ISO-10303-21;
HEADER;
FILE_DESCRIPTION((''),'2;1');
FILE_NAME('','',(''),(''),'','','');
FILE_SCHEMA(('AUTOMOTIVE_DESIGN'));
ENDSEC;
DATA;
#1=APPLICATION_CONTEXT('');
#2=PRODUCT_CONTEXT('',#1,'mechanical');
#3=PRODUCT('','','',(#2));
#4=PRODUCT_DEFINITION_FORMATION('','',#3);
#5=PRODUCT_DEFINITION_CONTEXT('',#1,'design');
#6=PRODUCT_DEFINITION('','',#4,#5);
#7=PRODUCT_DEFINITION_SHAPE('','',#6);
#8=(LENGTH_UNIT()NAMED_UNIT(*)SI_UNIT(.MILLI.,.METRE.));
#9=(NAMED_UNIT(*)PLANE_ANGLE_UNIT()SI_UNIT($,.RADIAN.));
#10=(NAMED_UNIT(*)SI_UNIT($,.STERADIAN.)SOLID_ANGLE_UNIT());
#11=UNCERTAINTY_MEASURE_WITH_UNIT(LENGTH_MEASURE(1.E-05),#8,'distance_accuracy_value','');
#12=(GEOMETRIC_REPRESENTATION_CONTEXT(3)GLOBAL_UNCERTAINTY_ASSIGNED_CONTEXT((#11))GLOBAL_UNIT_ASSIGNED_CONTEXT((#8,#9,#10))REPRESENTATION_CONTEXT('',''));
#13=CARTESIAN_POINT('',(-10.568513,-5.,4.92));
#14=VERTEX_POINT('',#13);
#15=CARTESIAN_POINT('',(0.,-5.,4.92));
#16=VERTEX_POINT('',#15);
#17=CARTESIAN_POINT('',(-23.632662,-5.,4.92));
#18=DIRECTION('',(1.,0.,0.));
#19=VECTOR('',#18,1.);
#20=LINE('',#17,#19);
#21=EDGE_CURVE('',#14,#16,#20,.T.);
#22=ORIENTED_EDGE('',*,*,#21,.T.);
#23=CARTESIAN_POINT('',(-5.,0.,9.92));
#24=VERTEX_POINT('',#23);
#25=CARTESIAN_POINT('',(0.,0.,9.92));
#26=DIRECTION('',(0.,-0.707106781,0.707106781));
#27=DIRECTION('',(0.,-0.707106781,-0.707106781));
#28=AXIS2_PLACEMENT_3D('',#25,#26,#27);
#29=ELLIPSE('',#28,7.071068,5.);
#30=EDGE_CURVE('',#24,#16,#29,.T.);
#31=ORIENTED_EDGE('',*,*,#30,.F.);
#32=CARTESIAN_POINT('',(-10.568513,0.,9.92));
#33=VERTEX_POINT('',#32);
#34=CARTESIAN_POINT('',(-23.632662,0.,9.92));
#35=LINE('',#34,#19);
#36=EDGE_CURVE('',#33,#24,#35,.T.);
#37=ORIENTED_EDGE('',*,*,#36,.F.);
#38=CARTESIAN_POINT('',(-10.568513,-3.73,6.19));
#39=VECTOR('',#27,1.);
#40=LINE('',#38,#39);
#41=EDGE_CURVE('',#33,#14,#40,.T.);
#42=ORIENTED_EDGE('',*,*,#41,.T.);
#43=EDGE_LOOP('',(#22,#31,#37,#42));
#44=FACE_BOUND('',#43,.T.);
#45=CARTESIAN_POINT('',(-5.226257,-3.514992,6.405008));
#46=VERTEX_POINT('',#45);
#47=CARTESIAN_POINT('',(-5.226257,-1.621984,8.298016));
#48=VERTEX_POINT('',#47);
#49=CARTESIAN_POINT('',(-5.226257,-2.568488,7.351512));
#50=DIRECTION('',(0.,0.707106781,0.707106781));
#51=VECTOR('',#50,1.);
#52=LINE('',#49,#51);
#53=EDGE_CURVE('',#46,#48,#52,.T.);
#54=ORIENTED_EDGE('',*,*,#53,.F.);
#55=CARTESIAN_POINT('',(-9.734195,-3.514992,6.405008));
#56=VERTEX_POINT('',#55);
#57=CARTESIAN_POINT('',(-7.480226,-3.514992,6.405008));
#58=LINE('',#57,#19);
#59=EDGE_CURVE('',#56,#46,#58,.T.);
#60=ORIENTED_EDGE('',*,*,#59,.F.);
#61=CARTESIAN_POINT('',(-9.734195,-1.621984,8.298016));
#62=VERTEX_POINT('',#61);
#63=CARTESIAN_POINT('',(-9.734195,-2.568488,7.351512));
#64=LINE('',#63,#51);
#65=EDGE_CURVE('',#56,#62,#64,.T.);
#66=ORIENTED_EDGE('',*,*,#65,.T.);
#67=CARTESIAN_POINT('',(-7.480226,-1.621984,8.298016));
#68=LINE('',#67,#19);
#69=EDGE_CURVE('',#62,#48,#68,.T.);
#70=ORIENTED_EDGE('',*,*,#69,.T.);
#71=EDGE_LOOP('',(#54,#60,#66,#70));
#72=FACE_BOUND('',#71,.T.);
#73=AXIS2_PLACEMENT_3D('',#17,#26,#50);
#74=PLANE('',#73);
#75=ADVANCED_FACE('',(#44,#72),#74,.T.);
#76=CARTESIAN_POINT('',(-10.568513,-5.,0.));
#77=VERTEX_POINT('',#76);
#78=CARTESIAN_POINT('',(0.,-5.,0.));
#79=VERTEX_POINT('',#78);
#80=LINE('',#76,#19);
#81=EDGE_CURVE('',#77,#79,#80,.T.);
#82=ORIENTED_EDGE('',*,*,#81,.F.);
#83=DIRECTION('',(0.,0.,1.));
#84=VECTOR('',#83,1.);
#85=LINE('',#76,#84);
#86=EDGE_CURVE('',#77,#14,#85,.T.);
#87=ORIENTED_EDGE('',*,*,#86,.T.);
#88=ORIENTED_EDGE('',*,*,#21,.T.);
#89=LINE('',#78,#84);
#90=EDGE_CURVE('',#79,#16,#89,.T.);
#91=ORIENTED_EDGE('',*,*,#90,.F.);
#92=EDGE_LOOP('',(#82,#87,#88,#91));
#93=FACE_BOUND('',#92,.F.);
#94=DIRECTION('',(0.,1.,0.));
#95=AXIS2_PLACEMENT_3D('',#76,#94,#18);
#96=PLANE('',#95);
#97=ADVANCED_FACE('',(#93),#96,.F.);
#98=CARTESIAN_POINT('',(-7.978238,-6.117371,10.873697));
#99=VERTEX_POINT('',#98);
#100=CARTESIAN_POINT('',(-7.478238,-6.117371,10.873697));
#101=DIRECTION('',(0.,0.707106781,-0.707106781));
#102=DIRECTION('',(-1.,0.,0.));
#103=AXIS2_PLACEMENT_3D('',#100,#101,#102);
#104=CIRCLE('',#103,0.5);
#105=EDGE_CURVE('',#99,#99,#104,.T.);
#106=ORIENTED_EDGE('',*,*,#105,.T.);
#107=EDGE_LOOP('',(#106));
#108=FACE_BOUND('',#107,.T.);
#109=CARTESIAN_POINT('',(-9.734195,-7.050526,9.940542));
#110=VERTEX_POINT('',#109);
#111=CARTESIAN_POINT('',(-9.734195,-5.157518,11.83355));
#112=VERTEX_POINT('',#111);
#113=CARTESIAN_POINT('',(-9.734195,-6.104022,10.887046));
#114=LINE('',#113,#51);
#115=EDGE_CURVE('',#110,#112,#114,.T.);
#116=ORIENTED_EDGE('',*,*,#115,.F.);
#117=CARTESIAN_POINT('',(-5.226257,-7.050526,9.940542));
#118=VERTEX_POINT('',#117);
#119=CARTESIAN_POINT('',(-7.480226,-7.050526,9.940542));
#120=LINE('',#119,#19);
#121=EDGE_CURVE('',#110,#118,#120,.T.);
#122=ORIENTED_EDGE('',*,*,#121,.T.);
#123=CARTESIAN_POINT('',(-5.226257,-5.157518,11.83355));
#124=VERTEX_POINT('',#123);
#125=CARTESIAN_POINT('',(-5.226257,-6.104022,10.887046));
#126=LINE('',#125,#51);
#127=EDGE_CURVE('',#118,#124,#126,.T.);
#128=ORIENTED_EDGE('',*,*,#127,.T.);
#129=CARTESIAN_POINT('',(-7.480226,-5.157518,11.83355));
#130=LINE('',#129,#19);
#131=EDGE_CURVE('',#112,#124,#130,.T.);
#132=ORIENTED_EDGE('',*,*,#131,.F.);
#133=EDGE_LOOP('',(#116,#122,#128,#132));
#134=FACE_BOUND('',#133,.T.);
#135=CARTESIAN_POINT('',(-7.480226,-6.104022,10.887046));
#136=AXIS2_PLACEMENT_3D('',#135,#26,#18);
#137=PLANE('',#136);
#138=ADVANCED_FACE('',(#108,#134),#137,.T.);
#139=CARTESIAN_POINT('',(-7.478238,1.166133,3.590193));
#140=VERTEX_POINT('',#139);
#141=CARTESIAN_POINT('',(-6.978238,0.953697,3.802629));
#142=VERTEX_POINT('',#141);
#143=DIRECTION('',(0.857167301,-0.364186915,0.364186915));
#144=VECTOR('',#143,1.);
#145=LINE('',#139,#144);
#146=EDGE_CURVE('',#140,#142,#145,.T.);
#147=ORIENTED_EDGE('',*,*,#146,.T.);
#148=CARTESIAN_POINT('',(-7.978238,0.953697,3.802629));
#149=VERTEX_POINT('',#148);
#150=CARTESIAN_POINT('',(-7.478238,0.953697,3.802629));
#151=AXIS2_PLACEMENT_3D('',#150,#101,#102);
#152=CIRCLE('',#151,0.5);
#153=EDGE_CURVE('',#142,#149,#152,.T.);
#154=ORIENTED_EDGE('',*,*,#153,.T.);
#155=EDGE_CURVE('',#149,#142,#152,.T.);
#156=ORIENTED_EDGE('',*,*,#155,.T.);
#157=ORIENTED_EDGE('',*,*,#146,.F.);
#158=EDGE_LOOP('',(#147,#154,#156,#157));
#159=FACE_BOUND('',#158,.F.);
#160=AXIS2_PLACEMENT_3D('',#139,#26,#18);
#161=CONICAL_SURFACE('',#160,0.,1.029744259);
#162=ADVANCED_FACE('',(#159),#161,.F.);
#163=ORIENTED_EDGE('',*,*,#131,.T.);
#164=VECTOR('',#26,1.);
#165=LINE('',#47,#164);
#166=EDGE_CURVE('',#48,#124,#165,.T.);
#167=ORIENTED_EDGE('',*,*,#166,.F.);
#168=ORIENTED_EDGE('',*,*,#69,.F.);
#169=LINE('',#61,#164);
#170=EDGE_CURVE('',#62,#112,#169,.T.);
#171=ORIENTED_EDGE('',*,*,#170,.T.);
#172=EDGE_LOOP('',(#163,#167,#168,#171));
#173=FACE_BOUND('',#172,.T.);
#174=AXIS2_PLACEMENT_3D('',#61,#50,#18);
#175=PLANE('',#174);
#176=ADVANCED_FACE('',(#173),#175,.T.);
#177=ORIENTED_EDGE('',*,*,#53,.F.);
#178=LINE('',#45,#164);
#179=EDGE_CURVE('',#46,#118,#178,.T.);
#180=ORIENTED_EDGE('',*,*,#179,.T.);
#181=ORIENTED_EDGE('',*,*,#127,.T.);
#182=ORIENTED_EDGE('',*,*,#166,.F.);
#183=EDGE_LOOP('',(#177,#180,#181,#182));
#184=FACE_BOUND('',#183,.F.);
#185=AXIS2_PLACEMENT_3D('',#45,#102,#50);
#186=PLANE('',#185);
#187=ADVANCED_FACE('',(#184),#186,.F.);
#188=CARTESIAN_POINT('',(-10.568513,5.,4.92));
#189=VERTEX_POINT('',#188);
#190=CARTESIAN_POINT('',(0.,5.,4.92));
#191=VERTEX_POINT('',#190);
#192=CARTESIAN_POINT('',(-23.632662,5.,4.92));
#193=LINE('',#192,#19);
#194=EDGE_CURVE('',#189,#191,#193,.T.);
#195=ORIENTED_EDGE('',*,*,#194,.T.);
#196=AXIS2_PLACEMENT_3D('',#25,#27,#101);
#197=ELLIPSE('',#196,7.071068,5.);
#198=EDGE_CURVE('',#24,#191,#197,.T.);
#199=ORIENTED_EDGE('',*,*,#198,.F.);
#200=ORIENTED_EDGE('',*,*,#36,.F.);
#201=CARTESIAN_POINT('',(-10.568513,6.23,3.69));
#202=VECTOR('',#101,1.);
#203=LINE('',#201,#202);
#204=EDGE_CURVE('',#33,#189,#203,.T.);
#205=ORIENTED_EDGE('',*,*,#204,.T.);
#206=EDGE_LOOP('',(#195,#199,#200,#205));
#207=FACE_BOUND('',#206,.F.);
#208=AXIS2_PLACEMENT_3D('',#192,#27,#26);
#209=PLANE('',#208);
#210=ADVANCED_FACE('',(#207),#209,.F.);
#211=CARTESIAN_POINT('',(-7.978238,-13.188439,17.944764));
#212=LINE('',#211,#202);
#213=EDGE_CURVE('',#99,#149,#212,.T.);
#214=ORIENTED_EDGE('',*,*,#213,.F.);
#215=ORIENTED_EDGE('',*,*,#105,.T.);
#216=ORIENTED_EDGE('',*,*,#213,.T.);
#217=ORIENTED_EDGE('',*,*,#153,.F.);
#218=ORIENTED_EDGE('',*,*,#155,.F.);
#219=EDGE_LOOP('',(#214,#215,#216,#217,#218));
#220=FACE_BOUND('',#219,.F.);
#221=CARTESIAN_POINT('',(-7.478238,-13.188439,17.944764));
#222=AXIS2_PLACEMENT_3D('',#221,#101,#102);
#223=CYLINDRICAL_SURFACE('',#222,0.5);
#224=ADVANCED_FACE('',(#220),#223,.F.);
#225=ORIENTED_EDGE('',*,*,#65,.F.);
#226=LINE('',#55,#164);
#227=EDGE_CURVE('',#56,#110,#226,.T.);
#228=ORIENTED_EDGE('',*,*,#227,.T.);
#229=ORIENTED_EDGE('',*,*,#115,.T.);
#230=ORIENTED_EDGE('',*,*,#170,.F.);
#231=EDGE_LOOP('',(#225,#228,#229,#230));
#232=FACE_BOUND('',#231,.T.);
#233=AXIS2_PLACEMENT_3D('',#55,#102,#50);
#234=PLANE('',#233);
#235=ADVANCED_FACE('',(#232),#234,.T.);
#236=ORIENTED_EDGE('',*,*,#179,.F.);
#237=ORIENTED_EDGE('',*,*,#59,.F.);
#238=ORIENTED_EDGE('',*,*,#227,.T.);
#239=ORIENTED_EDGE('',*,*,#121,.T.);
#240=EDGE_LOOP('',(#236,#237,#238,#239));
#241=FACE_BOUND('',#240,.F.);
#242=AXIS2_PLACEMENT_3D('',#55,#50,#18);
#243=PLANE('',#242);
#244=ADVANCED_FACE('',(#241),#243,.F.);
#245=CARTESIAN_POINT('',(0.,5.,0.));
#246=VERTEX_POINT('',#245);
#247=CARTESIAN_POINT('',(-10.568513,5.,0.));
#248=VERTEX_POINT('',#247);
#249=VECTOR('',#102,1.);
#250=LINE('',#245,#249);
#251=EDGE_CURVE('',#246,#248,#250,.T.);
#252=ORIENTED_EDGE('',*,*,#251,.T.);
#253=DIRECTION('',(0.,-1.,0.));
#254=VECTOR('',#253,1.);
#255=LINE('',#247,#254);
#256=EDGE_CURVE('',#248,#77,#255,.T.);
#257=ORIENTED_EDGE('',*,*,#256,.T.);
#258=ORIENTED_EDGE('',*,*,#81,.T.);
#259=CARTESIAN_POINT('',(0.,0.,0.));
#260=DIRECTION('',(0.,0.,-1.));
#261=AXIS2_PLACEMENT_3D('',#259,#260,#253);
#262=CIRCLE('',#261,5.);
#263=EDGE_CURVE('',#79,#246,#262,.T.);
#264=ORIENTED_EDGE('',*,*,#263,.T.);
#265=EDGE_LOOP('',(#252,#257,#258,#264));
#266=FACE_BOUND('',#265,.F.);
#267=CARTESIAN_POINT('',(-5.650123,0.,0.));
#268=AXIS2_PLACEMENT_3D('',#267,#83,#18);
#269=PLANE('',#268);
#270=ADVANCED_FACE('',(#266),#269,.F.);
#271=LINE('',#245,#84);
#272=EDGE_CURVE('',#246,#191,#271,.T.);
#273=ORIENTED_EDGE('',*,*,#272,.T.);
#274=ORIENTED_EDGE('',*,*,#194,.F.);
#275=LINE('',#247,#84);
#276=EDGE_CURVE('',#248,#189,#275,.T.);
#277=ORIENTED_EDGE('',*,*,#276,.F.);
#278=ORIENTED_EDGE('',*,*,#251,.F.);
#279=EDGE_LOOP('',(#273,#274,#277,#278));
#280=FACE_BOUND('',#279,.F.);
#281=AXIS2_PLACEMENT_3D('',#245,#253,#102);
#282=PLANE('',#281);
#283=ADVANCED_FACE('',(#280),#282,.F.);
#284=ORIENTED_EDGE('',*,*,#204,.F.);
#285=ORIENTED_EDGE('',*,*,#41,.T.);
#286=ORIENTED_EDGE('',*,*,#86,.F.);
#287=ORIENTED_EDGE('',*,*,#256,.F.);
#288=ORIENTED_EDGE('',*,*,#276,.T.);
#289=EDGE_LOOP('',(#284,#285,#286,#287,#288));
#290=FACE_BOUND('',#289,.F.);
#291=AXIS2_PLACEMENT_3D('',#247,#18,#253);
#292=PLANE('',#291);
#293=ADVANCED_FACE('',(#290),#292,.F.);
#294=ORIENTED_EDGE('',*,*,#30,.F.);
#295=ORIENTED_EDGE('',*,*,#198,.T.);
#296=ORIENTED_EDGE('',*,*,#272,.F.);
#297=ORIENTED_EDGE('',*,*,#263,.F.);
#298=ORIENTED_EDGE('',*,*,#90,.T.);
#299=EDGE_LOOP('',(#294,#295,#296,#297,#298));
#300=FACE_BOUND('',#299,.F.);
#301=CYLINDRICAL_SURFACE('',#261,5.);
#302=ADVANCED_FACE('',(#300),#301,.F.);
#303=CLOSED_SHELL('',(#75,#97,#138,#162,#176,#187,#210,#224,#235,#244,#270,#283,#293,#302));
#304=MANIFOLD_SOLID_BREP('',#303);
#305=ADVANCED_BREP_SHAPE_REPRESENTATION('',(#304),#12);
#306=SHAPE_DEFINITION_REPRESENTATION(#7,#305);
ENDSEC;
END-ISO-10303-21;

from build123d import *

# Parameters (mm, degrees)
F1_DEPTH    = 10
F2_T1_DEPTH = 36.6968120455
F3_W        = 4.5079379342
F3_H        = 2.6771172415
F4_DEPTH    = 5
F6_D        = 1
F6_DEPTH    = 10
F6_TIP      = 0.3004303095


# Not quite as in the source:
# - a fillet or chamfer that OpenCascade refuses, or shapes differently, is made with other operations: its cross-section is extruded or revolved along the edge and cut away or added


with BuildPart() as f1:
    # F0 (on Top) → F1 (new body)
    with BuildSketch(Plane.XY):
        with BuildLine():
            ThreePointArc((0, -5), (-5, 0), (0, 5))
            Line((0, 5), (-10.5685128878, 5))
            Line((-10.5685128878, 5), (-10.5685128878, -5))
            Line((-10.5685128878, -5), (0, -5))
        make_face()
    extrude(amount=F1_DEPTH)

    # F2: chamfer of 5.08 on 2 edges, made by hand

    # F2_s2 → F2_t1 (cut)
    with BuildSketch(Plane.YZ.offset(-23.6326624666)):
        Polygon((-5, 4.92), (0.08, 10), (-5, 10), align=None)
        Polygon((5, 4.92), (-0.08, 10), (5, 10), align=None)
    extrude(amount=F2_T1_DEPTH, mode=Mode.SUBTRACT)

    # F3 (on face) → F4 (join)
    with BuildSketch(Plane(origin=(0, -4.96, 4.96), x_dir=(1, 0, 0), z_dir=(0, -0.7071067812, 0.7071067812))):
        with Locations((-7.4802257586, 3.3821087563)):
            Rectangle(F3_W, F3_H)
    extrude(amount=F4_DEPTH)

    # F6
    with Locations(Plane(origin=(0, -8.4955339059, 8.4955339059), x_dir=(1, 0, 0), z_dir=(0, -0.7071067812, 0.7071067812))):
        with Locations((-7.4782376178, 3.3632300328)):
            Hole(F6_D / 2, depth=F6_DEPTH)
            with Locations((0, 0, -(F6_DEPTH + F6_TIP / 2))):  # 118° drill point
                Cone(0, F6_D / 2, F6_TIP, mode=Mode.SUBTRACT)


solid = f1.part
